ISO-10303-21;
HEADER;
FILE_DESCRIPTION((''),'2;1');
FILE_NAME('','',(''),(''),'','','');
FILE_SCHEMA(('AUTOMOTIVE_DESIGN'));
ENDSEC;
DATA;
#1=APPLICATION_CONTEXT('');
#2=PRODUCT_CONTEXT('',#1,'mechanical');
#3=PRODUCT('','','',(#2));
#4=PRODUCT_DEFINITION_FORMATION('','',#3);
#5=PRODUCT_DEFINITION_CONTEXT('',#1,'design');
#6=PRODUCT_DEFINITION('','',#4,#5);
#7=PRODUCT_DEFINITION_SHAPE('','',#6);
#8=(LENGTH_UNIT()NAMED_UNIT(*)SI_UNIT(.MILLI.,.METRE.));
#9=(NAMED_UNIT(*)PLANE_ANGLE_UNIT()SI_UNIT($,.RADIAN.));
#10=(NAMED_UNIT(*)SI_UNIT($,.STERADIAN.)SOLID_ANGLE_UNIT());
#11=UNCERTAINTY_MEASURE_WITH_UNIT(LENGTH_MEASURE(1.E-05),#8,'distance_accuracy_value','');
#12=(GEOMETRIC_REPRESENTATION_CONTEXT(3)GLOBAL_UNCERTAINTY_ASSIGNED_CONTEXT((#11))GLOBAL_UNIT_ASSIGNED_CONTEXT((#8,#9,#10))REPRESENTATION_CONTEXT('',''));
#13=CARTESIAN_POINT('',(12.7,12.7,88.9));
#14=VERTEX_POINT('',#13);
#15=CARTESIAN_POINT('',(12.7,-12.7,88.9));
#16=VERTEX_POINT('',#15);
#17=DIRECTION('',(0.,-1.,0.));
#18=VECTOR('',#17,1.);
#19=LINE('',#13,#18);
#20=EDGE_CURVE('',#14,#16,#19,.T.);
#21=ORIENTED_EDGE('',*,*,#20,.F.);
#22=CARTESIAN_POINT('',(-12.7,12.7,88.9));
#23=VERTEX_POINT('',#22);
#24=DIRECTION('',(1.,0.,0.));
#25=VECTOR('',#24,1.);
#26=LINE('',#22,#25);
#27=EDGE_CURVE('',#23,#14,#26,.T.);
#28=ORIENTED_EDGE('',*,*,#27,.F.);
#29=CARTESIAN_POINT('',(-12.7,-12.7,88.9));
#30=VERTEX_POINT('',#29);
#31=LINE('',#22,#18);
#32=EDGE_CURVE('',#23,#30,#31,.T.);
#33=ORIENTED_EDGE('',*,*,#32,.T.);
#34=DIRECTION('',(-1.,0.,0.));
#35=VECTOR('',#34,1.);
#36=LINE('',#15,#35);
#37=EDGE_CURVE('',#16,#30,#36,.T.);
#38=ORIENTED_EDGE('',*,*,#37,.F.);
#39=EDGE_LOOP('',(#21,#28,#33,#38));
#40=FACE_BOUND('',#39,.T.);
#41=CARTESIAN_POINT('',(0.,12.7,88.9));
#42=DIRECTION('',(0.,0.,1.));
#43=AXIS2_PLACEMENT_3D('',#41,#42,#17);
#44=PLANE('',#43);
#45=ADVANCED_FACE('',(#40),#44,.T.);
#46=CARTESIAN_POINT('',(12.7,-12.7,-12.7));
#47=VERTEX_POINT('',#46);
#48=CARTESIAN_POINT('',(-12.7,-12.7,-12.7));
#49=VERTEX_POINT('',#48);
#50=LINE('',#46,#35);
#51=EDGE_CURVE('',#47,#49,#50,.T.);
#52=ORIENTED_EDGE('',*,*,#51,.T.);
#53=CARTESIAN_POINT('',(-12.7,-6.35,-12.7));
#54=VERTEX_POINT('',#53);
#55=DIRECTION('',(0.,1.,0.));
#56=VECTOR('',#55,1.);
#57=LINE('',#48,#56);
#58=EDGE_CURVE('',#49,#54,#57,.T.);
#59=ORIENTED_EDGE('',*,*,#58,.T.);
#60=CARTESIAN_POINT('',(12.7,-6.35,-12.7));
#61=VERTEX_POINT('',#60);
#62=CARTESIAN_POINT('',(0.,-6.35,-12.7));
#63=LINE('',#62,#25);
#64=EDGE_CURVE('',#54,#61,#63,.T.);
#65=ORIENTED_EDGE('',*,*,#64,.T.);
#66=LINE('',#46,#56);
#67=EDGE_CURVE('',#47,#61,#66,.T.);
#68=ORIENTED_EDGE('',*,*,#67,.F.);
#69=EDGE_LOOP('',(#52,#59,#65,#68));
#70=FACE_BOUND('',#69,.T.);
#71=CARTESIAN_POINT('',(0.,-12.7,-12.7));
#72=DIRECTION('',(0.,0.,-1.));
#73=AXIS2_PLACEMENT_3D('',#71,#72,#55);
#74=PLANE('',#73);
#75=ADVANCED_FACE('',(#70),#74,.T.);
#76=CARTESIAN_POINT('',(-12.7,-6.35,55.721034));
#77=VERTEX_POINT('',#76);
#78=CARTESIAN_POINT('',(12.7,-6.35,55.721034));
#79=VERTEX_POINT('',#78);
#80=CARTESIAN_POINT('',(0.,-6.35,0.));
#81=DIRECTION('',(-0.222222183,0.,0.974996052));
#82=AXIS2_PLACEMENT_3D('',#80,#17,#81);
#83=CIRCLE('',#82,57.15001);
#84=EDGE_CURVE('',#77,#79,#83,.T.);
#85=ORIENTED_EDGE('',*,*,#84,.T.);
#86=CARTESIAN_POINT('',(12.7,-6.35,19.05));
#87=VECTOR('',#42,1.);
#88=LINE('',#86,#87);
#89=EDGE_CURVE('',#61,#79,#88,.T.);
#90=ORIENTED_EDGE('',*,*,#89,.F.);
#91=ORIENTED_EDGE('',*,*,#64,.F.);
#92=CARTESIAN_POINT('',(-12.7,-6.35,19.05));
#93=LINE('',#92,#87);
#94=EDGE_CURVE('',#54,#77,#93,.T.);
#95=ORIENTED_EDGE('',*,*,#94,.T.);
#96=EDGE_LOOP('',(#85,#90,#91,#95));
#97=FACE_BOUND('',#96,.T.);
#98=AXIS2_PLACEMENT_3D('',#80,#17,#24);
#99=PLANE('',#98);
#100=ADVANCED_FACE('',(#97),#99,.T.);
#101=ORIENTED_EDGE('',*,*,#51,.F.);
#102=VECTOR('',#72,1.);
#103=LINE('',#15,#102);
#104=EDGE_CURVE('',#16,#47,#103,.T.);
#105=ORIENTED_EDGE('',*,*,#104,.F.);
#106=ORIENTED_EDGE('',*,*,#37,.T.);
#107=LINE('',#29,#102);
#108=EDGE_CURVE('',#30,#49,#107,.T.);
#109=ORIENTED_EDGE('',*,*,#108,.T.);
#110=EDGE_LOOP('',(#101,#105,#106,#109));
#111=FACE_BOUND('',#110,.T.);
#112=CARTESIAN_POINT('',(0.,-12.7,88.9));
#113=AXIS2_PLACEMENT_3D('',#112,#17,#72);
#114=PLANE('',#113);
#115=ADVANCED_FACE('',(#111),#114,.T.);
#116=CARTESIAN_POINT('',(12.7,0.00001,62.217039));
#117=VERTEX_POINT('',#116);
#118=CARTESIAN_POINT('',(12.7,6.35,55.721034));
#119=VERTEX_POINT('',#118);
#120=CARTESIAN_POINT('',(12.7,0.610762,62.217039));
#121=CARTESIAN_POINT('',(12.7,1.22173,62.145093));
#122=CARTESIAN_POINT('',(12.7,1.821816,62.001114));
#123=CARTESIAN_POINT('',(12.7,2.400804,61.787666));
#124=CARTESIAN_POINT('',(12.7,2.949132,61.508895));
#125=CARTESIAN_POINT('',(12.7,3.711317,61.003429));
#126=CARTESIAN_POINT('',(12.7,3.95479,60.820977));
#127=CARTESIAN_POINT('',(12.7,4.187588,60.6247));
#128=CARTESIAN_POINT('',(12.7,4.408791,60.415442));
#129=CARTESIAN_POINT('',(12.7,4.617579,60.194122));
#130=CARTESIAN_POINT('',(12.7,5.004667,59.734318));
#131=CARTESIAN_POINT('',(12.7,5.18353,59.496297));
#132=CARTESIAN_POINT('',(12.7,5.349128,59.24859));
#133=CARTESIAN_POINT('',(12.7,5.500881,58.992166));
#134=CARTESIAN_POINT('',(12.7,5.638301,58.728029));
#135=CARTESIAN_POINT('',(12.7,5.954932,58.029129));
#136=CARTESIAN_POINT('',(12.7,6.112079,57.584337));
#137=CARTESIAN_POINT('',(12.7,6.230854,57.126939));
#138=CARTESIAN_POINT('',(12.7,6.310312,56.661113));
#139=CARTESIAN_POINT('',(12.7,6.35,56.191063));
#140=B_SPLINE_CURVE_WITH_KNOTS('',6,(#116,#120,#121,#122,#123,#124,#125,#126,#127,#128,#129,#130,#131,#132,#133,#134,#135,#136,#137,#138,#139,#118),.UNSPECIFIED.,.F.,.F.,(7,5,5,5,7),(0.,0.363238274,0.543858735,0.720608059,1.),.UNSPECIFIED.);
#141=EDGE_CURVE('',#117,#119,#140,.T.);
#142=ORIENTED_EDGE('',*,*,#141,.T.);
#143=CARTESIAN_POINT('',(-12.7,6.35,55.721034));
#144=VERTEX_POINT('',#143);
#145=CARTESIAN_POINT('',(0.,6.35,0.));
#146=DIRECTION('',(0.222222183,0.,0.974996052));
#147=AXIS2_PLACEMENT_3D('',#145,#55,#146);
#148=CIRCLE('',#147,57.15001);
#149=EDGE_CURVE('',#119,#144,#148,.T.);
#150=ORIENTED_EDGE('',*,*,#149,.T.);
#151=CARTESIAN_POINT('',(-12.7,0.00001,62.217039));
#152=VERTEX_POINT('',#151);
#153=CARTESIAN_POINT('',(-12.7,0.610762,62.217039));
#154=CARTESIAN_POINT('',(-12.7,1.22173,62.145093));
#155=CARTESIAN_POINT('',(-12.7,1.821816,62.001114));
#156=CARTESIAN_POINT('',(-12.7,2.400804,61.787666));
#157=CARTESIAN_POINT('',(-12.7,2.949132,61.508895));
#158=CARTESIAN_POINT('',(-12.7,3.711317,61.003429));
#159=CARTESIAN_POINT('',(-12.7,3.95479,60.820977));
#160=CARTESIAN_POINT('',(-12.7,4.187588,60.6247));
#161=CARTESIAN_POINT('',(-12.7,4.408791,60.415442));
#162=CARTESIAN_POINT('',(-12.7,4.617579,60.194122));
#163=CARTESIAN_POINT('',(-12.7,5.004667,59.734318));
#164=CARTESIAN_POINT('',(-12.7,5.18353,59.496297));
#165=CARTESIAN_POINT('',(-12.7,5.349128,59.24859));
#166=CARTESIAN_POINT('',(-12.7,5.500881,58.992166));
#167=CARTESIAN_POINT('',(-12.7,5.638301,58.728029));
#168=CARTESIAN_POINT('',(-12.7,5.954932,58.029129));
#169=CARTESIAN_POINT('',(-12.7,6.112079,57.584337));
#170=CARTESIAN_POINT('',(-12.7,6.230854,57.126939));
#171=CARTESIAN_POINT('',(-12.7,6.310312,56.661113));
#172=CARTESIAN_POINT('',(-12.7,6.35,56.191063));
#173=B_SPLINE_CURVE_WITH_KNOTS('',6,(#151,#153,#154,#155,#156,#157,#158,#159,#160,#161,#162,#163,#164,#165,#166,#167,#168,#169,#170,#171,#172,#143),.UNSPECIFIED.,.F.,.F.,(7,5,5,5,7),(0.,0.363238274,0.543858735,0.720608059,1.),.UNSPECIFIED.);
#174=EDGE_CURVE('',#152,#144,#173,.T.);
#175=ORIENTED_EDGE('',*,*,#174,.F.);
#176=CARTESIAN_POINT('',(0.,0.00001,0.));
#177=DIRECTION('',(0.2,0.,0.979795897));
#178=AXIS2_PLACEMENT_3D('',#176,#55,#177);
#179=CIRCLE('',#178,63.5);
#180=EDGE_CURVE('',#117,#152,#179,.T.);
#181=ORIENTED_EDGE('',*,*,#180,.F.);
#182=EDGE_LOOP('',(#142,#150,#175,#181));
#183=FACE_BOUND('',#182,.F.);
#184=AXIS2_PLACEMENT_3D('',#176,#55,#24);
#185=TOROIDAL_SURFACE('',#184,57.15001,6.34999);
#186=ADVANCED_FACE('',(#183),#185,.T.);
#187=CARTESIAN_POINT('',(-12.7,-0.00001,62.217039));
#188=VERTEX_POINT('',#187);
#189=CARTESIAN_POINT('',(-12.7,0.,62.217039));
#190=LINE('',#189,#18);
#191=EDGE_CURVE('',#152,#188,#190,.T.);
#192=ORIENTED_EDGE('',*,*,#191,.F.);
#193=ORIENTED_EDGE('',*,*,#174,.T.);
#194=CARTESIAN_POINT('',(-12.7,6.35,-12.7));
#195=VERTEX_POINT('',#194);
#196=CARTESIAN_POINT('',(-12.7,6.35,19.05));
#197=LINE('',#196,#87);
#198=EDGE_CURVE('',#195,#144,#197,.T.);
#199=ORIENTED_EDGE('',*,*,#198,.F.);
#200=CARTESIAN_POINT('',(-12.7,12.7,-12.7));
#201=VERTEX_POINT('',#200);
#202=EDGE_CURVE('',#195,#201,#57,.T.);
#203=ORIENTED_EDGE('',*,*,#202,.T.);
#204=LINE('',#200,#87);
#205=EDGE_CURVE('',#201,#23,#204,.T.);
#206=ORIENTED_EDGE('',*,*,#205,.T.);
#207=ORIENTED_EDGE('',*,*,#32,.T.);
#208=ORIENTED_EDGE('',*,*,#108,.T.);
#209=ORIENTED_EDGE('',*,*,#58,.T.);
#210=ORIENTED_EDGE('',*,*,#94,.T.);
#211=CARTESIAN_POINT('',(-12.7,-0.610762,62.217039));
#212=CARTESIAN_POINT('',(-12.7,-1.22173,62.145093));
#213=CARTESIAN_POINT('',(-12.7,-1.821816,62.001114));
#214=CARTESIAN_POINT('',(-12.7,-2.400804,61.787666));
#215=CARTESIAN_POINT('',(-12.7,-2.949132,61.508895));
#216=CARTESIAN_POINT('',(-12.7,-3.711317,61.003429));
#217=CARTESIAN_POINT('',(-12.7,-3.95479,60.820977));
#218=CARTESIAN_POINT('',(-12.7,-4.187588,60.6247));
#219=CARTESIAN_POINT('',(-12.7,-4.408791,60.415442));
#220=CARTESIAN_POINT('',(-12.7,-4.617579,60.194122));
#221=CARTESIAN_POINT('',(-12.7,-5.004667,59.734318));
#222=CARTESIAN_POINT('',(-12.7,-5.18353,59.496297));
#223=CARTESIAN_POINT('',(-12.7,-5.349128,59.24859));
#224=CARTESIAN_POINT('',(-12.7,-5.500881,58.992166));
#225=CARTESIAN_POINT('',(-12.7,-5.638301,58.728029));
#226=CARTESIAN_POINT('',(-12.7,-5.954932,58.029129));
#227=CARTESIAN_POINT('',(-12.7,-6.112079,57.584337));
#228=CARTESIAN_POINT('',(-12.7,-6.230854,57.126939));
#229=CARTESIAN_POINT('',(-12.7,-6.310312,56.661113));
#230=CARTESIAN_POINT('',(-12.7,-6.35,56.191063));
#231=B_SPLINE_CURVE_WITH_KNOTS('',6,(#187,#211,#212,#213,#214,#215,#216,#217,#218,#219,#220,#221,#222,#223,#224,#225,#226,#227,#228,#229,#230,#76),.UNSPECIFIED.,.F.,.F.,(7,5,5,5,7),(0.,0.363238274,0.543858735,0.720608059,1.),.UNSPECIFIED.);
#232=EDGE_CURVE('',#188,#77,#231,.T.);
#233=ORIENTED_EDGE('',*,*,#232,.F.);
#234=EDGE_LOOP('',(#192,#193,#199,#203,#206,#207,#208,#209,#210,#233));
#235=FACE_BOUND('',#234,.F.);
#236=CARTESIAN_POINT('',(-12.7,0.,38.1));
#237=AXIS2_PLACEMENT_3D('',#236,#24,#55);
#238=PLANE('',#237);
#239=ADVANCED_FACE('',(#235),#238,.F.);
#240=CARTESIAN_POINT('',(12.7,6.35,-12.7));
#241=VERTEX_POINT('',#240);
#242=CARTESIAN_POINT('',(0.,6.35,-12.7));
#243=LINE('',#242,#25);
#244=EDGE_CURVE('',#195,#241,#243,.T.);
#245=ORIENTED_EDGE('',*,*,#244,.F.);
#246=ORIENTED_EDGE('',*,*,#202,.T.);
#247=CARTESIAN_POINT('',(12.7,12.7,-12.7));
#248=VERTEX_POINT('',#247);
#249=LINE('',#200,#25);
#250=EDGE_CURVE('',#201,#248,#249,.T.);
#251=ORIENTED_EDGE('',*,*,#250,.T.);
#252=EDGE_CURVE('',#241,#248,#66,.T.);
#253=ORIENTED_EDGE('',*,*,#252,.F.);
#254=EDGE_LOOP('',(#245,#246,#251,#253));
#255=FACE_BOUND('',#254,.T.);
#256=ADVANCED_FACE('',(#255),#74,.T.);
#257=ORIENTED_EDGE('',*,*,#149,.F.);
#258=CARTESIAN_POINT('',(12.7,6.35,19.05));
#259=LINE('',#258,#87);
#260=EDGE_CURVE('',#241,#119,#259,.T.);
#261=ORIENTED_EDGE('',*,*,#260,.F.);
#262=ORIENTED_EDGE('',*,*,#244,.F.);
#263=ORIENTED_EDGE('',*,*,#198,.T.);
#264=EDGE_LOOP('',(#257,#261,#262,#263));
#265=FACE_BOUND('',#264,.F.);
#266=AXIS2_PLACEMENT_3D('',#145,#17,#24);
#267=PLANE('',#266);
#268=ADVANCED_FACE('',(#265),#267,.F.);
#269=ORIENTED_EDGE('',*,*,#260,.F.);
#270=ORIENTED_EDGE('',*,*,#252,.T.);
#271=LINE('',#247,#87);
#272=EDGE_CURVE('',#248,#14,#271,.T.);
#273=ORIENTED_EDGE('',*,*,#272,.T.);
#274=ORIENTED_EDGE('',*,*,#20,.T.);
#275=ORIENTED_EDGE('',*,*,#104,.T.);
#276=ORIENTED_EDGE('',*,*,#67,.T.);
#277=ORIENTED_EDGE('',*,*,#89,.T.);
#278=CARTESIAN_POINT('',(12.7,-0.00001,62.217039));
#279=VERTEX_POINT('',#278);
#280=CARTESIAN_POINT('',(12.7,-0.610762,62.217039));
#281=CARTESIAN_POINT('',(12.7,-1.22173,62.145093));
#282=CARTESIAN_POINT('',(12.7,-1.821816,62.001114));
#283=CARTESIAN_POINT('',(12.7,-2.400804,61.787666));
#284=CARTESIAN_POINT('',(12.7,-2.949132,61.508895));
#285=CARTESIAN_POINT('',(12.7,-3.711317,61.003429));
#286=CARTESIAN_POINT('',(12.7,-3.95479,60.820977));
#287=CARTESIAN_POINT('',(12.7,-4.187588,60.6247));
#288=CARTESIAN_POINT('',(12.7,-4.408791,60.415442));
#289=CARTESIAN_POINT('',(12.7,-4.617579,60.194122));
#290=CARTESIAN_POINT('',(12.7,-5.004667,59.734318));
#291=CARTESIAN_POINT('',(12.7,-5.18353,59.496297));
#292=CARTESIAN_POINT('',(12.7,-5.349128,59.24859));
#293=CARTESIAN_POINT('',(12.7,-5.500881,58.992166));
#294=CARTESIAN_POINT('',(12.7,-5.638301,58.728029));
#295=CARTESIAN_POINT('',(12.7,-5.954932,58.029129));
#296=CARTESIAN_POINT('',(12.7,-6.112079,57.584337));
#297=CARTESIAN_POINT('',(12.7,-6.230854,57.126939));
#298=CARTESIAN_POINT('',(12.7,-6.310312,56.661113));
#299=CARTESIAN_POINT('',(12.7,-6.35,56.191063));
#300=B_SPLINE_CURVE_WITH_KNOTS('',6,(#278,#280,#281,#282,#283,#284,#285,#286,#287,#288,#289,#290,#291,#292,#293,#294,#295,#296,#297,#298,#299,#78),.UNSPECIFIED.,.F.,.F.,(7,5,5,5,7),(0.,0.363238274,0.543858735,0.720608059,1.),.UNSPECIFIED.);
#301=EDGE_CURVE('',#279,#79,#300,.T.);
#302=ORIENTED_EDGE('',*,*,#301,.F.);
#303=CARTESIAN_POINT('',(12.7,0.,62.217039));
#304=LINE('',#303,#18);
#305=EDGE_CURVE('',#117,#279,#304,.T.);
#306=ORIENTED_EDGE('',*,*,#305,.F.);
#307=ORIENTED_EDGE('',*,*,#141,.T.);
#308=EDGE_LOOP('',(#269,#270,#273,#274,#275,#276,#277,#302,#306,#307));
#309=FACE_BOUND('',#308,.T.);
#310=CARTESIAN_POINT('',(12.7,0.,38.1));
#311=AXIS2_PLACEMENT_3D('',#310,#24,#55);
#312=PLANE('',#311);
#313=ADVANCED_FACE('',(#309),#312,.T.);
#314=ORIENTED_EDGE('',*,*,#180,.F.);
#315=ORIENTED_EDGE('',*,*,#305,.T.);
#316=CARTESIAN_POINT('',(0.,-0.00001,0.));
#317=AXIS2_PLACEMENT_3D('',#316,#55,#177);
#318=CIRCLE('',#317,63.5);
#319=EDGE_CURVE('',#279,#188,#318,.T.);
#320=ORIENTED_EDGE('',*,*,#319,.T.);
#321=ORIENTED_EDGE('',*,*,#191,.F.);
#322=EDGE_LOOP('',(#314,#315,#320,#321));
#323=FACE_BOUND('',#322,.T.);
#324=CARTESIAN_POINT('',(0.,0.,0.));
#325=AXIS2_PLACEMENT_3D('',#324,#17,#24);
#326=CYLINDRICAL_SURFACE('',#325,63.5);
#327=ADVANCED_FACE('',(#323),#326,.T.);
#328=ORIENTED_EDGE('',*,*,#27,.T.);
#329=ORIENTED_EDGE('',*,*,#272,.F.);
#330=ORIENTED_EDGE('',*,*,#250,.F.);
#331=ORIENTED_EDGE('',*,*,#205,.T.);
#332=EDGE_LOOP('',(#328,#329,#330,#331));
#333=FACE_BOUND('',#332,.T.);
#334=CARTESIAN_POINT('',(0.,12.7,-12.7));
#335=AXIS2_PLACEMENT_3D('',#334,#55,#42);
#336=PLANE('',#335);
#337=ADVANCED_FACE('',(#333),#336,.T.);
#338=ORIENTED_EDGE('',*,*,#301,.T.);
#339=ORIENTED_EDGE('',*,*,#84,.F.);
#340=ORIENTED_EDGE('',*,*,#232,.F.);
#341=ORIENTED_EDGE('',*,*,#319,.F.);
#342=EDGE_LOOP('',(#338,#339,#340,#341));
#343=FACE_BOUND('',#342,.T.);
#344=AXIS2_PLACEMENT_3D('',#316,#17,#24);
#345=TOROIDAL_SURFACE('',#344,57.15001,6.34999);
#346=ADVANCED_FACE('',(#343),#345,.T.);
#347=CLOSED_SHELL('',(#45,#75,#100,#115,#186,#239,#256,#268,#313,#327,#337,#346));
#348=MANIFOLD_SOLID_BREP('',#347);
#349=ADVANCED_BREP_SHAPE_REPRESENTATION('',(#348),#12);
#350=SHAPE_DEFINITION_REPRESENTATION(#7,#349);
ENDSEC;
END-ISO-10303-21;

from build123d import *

# Parameters (mm, degrees)
F0_R     = 63.5
F0_R_2   = 6.35
F1_DEPTH = 6.35
F2_R     = 6.34999
F4_DEPTH = 12.7


# Not quite as in the source:
# - a fillet or chamfer is up to 0.001 mm smaller than in the source, because OpenCascade refuses the exact size


with BuildPart() as f1:
    # F0 (on Front) → F1 (new body, symmetric)
    with BuildSketch(Plane.XZ):
        Circle(F0_R)
        Circle(F0_R_2, mode=Mode.SUBTRACT)
    extrude(amount=F1_DEPTH, both=True)

    # F2 (radius 6.35 in the source; OpenCascade refuses exactly that, so slightly less here)
    f2_edges = [f1.edges().sort_by_distance(p)[0] for p in [
        (-63.5, -6.35, 0),
        (-63.5, 6.35, 0),
    ]]
    fillet(f2_edges, radius=F2_R)

    # F3 (on Right) → F4 (join, symmetric)
    with BuildSketch(Plane.YZ):
        Polygon((-12.7, -12.7), (0, -12.7), (12.7, -12.7), (12.7, 88.9), (-12.7, 88.9), align=None)
    extrude(amount=F4_DEPTH, both=True)


solid = f1.part
